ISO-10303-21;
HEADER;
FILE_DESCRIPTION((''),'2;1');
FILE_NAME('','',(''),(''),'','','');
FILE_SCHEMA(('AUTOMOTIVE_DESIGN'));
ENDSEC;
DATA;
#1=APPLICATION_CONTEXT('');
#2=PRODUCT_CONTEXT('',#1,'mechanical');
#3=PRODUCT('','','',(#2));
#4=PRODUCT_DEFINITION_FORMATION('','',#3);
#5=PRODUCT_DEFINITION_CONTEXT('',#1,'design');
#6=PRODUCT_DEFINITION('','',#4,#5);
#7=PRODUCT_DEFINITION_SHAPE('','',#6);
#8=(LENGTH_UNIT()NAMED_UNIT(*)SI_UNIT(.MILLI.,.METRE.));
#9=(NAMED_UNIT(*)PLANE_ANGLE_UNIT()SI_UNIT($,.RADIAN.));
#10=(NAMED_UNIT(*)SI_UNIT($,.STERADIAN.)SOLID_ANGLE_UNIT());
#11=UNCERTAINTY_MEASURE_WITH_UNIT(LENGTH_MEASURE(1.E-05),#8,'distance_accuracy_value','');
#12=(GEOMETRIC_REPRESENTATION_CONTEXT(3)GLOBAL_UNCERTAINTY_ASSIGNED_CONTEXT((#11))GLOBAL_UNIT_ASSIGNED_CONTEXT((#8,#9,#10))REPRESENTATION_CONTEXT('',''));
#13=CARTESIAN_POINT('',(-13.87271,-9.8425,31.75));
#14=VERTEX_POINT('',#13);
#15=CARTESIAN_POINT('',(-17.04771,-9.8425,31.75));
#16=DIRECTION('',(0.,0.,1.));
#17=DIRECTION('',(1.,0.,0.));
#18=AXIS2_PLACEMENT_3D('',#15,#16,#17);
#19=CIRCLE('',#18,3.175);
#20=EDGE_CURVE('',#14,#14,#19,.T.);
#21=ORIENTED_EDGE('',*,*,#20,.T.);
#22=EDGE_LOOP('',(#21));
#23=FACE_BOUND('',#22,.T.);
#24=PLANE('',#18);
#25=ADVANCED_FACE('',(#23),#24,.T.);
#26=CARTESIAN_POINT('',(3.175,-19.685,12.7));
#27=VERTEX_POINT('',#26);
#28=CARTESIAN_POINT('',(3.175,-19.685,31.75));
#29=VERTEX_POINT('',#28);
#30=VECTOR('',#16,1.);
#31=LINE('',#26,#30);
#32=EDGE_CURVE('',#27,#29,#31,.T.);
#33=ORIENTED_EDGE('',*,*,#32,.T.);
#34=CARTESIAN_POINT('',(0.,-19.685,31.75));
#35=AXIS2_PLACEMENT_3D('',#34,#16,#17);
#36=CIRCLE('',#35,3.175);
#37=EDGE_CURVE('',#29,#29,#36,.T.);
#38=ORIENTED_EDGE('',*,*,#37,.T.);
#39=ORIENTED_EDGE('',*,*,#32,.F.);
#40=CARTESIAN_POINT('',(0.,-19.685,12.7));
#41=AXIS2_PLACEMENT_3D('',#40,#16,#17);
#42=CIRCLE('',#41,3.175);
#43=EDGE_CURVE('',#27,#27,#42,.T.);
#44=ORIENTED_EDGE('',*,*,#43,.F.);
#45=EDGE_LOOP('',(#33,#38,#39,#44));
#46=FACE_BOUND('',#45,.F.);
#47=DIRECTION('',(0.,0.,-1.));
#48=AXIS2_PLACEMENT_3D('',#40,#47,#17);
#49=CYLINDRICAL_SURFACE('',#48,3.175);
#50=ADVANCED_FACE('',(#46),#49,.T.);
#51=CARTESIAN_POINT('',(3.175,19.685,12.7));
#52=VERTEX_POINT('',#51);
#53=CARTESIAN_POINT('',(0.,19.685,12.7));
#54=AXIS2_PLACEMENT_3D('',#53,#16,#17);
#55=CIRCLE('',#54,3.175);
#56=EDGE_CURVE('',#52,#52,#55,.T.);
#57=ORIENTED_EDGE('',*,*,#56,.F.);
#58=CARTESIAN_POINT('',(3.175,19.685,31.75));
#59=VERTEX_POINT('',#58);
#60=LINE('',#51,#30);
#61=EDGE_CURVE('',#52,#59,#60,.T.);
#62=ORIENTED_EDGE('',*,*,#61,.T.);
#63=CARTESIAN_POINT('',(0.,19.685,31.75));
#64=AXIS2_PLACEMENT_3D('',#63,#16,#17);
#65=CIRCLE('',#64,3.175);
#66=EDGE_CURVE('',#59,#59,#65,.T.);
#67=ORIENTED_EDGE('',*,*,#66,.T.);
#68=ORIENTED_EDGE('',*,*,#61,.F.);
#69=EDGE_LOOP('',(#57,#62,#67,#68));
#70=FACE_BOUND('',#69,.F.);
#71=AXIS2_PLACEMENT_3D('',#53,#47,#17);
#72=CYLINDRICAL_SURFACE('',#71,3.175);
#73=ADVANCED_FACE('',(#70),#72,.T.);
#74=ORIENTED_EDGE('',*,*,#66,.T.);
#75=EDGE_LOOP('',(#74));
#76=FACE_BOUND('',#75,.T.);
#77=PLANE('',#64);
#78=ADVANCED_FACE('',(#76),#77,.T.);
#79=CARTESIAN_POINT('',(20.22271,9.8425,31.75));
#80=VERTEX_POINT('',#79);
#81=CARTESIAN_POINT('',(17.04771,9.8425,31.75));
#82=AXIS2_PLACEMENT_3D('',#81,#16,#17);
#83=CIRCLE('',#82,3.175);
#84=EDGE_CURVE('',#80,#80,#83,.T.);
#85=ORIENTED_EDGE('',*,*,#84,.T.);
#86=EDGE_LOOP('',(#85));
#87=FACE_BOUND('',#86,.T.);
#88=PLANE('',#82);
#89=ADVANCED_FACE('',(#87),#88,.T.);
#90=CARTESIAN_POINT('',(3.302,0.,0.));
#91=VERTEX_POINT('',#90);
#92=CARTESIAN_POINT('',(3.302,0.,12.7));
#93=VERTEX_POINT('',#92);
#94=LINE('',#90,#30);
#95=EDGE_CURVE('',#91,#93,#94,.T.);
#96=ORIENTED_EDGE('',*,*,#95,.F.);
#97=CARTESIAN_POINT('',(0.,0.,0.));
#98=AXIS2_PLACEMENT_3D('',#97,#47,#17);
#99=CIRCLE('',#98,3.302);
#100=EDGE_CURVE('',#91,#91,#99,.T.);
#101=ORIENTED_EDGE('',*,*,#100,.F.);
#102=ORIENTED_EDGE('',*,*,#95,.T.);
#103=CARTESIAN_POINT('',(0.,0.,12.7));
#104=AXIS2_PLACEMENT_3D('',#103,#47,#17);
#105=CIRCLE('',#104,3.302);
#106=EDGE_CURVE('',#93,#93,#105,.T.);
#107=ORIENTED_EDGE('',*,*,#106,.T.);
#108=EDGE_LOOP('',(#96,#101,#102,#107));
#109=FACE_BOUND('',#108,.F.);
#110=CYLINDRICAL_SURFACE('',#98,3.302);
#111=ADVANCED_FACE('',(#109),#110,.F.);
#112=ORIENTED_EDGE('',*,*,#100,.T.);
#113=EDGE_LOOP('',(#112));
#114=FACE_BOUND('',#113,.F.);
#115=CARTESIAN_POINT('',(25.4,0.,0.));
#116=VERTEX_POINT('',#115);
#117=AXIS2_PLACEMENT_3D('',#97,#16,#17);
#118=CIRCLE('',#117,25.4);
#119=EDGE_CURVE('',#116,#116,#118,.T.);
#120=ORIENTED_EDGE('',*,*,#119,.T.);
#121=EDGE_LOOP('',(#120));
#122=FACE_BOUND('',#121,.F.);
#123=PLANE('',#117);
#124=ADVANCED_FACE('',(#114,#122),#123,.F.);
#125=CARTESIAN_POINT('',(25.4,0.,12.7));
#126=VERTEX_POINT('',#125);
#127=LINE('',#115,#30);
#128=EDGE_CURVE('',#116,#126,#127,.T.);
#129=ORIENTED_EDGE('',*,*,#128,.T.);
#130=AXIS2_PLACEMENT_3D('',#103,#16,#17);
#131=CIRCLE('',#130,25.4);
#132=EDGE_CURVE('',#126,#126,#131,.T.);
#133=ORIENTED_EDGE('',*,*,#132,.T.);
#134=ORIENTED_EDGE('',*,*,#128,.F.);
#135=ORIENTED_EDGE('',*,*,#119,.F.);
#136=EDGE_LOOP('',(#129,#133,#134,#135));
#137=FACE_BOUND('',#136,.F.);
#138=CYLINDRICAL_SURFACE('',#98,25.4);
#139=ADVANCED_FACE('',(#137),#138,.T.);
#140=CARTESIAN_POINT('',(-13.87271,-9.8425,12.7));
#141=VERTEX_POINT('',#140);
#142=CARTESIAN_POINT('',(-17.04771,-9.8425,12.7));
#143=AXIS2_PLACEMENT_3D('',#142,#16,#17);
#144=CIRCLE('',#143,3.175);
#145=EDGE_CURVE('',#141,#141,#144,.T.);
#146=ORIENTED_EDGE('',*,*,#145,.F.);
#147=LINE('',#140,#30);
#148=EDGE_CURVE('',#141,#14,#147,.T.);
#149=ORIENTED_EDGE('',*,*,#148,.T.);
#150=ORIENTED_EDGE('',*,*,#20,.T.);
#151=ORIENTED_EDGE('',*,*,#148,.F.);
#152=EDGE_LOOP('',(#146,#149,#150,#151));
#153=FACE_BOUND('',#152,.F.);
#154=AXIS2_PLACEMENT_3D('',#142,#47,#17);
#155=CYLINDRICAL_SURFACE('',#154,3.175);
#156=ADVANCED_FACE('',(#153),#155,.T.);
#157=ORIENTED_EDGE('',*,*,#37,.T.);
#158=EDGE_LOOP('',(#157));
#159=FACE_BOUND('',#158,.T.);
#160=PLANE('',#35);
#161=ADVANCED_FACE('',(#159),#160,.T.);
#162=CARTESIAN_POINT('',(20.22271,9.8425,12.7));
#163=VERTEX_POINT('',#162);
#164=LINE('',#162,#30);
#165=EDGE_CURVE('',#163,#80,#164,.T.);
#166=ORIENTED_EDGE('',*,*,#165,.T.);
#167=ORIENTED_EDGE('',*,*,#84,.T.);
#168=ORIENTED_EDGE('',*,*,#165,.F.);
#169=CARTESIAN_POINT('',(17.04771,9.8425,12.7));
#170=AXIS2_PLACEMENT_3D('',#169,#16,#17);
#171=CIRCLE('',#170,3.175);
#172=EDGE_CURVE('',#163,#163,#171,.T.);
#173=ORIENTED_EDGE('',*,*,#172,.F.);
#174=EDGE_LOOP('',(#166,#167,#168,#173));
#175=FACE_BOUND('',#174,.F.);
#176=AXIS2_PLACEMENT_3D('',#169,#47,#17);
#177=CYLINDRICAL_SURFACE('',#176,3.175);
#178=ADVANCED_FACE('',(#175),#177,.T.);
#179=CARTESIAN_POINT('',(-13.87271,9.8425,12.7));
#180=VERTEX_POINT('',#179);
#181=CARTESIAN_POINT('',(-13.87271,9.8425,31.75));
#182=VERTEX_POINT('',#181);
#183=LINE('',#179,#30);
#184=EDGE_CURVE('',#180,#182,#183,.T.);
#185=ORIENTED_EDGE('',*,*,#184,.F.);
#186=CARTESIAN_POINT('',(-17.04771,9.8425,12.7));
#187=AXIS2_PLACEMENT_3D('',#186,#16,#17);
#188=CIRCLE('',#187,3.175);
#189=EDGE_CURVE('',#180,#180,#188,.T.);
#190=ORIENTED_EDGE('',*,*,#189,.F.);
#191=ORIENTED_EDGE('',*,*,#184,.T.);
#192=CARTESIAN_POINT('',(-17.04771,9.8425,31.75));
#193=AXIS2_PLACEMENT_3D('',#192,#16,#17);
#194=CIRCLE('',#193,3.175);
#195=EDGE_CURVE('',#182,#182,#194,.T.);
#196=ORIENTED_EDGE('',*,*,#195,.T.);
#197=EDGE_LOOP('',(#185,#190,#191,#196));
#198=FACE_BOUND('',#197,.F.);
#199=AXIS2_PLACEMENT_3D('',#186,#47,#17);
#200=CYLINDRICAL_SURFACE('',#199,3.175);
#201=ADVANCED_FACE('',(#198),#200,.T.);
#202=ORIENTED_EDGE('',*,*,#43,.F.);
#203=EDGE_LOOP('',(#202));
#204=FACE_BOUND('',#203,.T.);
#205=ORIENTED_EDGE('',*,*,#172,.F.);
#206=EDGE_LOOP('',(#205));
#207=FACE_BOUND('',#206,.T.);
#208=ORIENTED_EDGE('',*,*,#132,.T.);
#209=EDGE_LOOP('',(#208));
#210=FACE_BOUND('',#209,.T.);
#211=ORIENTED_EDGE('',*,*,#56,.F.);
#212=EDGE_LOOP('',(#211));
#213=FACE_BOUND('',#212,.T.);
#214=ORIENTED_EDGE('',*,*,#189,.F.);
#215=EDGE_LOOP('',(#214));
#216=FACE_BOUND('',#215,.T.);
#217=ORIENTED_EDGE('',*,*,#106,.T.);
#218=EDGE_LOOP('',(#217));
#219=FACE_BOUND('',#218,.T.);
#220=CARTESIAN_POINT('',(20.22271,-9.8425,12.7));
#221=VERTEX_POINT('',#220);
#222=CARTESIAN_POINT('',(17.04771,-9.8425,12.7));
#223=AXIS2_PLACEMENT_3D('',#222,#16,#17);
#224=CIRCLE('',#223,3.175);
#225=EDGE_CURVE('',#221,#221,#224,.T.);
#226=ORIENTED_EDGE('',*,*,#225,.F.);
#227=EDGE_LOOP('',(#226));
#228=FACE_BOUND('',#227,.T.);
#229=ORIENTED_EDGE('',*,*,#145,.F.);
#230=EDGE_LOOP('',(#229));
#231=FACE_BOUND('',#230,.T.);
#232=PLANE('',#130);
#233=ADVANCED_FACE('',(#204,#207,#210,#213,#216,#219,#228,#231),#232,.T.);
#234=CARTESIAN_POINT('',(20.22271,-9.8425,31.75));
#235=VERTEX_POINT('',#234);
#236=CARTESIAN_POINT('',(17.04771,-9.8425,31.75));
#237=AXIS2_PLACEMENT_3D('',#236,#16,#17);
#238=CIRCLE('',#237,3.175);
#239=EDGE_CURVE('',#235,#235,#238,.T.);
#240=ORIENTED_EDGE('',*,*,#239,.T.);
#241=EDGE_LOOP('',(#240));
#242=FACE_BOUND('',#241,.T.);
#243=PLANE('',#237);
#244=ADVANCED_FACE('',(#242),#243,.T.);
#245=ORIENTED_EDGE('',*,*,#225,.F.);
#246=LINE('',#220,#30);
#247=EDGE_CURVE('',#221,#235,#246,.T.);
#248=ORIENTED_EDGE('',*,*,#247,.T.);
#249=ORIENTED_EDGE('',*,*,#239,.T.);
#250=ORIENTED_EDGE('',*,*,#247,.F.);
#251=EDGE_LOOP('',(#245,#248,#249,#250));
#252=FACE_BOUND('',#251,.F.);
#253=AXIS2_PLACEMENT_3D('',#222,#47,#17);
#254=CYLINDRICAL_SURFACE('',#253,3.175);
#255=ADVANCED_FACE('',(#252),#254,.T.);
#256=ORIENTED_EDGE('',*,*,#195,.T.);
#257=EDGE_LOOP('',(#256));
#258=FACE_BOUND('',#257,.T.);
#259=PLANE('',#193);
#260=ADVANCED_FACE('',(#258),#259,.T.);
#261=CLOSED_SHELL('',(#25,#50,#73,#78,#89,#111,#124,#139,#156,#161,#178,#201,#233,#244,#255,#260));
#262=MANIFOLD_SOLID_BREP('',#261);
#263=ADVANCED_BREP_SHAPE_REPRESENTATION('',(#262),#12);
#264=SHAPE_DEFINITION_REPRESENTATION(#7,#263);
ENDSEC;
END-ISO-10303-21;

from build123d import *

# Parameters (mm, degrees)
F0_R     = 25.4
F1_DEPTH = 12.7
F2_R     = 3.302
F3_DEPTH = 12.7
F4_R     = 3.175
F5_DEPTH = 19.05


# Not quite as in the source:
# - a feature names something its author has since deleted; it is built from what else it names


with BuildPart() as f1:
    # F0 (on Top) → F1 (new body)
    with BuildSketch(Plane.XY):
        Circle(F0_R)
    extrude(amount=F1_DEPTH)

    # F2 (on face) → F3 (cut)
    with BuildSketch(Plane(origin=(0, 0, 0), x_dir=(1, 0, 0), z_dir=(0, 0, -1))):
        Circle(F2_R)
    extrude(amount=-F3_DEPTH, mode=Mode.SUBTRACT)

    # F4 (on face) → F5 (join)
    with BuildSketch(Plane.XY.offset(12.7)):
        with Locations((0, 19.685)):
            Circle(F4_R)
        with Locations((-17.0477100735, 9.8425)):
            Circle(F4_R)
        with Locations((-17.0477100735, -9.8425)):
            Circle(F4_R)
        with Locations((0, -19.685)):
            Circle(F4_R)
        with Locations((17.0477100735, -9.8425)):
            Circle(F4_R)
        with Locations((17.0477100735, 9.8425)):
            Circle(F4_R)
    extrude(amount=F5_DEPTH)


solid = f1.part
